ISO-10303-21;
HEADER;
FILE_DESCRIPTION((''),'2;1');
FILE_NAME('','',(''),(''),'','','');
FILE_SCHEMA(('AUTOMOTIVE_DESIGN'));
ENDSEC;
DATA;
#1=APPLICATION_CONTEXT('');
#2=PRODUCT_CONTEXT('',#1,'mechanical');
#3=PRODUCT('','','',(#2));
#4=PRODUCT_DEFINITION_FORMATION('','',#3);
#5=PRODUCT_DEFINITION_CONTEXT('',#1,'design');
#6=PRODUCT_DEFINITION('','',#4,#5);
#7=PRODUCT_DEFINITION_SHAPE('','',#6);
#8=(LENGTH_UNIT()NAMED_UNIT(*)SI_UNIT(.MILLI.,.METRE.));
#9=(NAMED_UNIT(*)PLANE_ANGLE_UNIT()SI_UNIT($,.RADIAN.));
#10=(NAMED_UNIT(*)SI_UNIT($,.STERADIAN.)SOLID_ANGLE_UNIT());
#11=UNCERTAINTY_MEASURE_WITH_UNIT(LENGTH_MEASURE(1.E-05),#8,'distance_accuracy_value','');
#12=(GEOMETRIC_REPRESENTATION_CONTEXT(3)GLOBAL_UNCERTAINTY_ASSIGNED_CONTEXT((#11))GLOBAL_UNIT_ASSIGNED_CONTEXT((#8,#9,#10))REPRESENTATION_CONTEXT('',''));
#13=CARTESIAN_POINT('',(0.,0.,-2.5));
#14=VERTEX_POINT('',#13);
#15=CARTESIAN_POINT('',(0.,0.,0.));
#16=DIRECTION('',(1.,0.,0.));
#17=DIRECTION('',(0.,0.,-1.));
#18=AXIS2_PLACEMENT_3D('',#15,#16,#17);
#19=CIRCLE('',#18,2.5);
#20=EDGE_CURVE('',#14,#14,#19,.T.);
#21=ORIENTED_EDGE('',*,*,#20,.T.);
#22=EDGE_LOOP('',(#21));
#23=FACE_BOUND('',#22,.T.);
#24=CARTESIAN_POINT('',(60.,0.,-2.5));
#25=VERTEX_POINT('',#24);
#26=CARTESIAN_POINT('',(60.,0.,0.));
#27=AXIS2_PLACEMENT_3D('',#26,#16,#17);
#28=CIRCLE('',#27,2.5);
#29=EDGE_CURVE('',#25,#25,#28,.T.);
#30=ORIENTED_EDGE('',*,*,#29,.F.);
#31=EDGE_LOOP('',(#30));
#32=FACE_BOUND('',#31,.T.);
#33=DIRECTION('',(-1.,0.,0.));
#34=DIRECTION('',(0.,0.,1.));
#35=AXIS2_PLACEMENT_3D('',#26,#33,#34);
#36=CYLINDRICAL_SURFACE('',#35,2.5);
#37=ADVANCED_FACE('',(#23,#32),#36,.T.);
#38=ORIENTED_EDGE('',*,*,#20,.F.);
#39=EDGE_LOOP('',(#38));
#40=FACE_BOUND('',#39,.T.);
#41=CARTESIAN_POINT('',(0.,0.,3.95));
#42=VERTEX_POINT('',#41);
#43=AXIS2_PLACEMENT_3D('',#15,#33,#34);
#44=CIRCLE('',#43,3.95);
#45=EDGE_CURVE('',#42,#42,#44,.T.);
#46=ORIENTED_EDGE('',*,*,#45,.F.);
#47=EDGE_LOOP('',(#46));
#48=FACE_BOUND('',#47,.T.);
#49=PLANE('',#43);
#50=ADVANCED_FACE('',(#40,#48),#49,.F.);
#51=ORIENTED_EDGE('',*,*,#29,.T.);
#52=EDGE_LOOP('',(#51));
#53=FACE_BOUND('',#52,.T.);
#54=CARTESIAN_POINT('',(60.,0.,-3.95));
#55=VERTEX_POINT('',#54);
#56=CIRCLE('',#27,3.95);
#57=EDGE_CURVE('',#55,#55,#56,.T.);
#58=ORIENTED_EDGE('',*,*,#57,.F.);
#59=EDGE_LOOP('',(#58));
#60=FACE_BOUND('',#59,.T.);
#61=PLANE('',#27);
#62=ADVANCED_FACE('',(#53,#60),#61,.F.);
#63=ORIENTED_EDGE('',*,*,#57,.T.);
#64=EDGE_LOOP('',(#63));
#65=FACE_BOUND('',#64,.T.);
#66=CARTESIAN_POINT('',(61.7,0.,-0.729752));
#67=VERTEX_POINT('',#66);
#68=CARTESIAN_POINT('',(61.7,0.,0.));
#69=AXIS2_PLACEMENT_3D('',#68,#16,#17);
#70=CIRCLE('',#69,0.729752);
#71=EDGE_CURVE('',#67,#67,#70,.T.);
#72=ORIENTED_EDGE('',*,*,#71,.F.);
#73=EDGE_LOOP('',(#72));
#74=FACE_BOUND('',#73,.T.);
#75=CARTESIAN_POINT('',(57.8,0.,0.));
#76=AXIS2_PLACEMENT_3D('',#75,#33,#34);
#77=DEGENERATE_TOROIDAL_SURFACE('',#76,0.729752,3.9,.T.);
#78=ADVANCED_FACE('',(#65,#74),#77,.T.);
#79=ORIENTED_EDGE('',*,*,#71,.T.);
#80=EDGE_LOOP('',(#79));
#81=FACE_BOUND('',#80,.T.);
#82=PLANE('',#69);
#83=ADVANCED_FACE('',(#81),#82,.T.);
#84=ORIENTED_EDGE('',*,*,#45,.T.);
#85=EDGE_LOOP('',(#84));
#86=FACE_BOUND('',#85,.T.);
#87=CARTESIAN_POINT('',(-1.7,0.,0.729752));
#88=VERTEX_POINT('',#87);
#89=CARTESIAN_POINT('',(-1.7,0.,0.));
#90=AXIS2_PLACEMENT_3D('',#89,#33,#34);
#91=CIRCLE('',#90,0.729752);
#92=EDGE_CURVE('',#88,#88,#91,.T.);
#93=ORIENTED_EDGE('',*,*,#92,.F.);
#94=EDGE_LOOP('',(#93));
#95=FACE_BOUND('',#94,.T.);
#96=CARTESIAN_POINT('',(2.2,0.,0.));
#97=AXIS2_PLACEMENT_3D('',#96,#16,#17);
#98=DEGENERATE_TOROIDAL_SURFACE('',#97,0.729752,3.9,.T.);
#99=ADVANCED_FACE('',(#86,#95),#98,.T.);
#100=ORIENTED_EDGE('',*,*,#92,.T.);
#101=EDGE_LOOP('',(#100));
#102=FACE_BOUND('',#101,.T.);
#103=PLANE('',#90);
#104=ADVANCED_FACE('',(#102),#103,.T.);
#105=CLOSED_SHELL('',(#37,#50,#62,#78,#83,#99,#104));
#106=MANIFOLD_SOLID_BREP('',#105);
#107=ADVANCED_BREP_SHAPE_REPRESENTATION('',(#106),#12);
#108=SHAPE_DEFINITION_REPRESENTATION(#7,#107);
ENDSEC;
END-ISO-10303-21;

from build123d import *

# Parameters (mm, degrees)
SKETCH_1_R      = 2.5
EXTRUDE_1_DEPTH = 60
SKETCH_2_R      = 3.95
EXTRUDE_2_DEPTH = 1.7
EXTRUDE_START   = 1.7
SKETCH_3_R      = 3.95
EXTRUDE_3_DEPTH = 1.7
FILLET_1_R      = 3.9


with BuildPart() as part:
    # Эскиз1 → Бобышка-Вытянуть1 (new body)
    with BuildSketch(Plane(origin=(0, 0, 0), x_dir=(0, 0, -1), z_dir=(1, 0, 0))):
        Circle(SKETCH_1_R)
    extrude(amount=EXTRUDE_1_DEPTH)

    # Эскиз2 → Бобышка-Вытянуть2 (add)
    with BuildSketch(Plane.ZY):
        Circle(SKETCH_2_R)
    extrude(amount=EXTRUDE_2_DEPTH)

    # Эскиз3 → Бобышка-Вытянуть3 (add)
    with BuildSketch(Plane(origin=(60, 0, 0), x_dir=(0, 0, -1), z_dir=(1, 0, 0)).offset(EXTRUDE_START)):
        with Locations(Location((0, 0, 0), (0, 0, 180))):
            Circle(SKETCH_3_R)
    extrude(amount=-EXTRUDE_3_DEPTH)

    # Скругление1
    # the kernel refuses this fillet: 3.9 mm, written as the material it takes off along each edge
    with BuildSketch(Plane(origin=(61.7, 0, 0), x_dir=(0, 0, 1), z_dir=(0, 1, 0))) as fillet_1_piece_1:
        with BuildLine():
            CenterArc((0.729751562, -3.9), FILLET_1_R, 34.339994944, 55.660005056)
            Line((0.729751562, 0), (0.729751562, 0.078))
            Line((0.729751562, 0.078), (3.95, 0.078))
            Line((3.95, 0.078), (4.028, 0))
            ThreePointArc((4.028, 0), (4.028, -0.85), (4.014404969, -1.656))
            Line((4.014404969, -1.656), (3.95, -1.7))
        make_face()
    revolve(axis=Axis((61.7, 0, 0), (1, 0, 0)), mode=Mode.SUBTRACT)
    with BuildSketch(Plane(origin=(-1.7, 0, 0), x_dir=(0, 0, 1), z_dir=(0, -1, 0))) as fillet_1_piece_2:
        with BuildLine():
            CenterArc((0.729751562, -3.9), FILLET_1_R, 34.339994944, 55.660005056)
            Line((0.729751562, 0), (0.729751562, 0.078))
            Line((0.729751562, 0.078), (3.95, 0.078))
            Line((3.95, 0.078), (4.028, 0))
            ThreePointArc((4.028, 0), (4.028, -0.85), (4.014404969, -1.656))
            Line((4.014404969, -1.656), (3.95, -1.7))
        make_face()
    revolve(axis=Axis((-1.7, 0, 0), (-1, 0, 0)), mode=Mode.SUBTRACT)


solid = part.part
